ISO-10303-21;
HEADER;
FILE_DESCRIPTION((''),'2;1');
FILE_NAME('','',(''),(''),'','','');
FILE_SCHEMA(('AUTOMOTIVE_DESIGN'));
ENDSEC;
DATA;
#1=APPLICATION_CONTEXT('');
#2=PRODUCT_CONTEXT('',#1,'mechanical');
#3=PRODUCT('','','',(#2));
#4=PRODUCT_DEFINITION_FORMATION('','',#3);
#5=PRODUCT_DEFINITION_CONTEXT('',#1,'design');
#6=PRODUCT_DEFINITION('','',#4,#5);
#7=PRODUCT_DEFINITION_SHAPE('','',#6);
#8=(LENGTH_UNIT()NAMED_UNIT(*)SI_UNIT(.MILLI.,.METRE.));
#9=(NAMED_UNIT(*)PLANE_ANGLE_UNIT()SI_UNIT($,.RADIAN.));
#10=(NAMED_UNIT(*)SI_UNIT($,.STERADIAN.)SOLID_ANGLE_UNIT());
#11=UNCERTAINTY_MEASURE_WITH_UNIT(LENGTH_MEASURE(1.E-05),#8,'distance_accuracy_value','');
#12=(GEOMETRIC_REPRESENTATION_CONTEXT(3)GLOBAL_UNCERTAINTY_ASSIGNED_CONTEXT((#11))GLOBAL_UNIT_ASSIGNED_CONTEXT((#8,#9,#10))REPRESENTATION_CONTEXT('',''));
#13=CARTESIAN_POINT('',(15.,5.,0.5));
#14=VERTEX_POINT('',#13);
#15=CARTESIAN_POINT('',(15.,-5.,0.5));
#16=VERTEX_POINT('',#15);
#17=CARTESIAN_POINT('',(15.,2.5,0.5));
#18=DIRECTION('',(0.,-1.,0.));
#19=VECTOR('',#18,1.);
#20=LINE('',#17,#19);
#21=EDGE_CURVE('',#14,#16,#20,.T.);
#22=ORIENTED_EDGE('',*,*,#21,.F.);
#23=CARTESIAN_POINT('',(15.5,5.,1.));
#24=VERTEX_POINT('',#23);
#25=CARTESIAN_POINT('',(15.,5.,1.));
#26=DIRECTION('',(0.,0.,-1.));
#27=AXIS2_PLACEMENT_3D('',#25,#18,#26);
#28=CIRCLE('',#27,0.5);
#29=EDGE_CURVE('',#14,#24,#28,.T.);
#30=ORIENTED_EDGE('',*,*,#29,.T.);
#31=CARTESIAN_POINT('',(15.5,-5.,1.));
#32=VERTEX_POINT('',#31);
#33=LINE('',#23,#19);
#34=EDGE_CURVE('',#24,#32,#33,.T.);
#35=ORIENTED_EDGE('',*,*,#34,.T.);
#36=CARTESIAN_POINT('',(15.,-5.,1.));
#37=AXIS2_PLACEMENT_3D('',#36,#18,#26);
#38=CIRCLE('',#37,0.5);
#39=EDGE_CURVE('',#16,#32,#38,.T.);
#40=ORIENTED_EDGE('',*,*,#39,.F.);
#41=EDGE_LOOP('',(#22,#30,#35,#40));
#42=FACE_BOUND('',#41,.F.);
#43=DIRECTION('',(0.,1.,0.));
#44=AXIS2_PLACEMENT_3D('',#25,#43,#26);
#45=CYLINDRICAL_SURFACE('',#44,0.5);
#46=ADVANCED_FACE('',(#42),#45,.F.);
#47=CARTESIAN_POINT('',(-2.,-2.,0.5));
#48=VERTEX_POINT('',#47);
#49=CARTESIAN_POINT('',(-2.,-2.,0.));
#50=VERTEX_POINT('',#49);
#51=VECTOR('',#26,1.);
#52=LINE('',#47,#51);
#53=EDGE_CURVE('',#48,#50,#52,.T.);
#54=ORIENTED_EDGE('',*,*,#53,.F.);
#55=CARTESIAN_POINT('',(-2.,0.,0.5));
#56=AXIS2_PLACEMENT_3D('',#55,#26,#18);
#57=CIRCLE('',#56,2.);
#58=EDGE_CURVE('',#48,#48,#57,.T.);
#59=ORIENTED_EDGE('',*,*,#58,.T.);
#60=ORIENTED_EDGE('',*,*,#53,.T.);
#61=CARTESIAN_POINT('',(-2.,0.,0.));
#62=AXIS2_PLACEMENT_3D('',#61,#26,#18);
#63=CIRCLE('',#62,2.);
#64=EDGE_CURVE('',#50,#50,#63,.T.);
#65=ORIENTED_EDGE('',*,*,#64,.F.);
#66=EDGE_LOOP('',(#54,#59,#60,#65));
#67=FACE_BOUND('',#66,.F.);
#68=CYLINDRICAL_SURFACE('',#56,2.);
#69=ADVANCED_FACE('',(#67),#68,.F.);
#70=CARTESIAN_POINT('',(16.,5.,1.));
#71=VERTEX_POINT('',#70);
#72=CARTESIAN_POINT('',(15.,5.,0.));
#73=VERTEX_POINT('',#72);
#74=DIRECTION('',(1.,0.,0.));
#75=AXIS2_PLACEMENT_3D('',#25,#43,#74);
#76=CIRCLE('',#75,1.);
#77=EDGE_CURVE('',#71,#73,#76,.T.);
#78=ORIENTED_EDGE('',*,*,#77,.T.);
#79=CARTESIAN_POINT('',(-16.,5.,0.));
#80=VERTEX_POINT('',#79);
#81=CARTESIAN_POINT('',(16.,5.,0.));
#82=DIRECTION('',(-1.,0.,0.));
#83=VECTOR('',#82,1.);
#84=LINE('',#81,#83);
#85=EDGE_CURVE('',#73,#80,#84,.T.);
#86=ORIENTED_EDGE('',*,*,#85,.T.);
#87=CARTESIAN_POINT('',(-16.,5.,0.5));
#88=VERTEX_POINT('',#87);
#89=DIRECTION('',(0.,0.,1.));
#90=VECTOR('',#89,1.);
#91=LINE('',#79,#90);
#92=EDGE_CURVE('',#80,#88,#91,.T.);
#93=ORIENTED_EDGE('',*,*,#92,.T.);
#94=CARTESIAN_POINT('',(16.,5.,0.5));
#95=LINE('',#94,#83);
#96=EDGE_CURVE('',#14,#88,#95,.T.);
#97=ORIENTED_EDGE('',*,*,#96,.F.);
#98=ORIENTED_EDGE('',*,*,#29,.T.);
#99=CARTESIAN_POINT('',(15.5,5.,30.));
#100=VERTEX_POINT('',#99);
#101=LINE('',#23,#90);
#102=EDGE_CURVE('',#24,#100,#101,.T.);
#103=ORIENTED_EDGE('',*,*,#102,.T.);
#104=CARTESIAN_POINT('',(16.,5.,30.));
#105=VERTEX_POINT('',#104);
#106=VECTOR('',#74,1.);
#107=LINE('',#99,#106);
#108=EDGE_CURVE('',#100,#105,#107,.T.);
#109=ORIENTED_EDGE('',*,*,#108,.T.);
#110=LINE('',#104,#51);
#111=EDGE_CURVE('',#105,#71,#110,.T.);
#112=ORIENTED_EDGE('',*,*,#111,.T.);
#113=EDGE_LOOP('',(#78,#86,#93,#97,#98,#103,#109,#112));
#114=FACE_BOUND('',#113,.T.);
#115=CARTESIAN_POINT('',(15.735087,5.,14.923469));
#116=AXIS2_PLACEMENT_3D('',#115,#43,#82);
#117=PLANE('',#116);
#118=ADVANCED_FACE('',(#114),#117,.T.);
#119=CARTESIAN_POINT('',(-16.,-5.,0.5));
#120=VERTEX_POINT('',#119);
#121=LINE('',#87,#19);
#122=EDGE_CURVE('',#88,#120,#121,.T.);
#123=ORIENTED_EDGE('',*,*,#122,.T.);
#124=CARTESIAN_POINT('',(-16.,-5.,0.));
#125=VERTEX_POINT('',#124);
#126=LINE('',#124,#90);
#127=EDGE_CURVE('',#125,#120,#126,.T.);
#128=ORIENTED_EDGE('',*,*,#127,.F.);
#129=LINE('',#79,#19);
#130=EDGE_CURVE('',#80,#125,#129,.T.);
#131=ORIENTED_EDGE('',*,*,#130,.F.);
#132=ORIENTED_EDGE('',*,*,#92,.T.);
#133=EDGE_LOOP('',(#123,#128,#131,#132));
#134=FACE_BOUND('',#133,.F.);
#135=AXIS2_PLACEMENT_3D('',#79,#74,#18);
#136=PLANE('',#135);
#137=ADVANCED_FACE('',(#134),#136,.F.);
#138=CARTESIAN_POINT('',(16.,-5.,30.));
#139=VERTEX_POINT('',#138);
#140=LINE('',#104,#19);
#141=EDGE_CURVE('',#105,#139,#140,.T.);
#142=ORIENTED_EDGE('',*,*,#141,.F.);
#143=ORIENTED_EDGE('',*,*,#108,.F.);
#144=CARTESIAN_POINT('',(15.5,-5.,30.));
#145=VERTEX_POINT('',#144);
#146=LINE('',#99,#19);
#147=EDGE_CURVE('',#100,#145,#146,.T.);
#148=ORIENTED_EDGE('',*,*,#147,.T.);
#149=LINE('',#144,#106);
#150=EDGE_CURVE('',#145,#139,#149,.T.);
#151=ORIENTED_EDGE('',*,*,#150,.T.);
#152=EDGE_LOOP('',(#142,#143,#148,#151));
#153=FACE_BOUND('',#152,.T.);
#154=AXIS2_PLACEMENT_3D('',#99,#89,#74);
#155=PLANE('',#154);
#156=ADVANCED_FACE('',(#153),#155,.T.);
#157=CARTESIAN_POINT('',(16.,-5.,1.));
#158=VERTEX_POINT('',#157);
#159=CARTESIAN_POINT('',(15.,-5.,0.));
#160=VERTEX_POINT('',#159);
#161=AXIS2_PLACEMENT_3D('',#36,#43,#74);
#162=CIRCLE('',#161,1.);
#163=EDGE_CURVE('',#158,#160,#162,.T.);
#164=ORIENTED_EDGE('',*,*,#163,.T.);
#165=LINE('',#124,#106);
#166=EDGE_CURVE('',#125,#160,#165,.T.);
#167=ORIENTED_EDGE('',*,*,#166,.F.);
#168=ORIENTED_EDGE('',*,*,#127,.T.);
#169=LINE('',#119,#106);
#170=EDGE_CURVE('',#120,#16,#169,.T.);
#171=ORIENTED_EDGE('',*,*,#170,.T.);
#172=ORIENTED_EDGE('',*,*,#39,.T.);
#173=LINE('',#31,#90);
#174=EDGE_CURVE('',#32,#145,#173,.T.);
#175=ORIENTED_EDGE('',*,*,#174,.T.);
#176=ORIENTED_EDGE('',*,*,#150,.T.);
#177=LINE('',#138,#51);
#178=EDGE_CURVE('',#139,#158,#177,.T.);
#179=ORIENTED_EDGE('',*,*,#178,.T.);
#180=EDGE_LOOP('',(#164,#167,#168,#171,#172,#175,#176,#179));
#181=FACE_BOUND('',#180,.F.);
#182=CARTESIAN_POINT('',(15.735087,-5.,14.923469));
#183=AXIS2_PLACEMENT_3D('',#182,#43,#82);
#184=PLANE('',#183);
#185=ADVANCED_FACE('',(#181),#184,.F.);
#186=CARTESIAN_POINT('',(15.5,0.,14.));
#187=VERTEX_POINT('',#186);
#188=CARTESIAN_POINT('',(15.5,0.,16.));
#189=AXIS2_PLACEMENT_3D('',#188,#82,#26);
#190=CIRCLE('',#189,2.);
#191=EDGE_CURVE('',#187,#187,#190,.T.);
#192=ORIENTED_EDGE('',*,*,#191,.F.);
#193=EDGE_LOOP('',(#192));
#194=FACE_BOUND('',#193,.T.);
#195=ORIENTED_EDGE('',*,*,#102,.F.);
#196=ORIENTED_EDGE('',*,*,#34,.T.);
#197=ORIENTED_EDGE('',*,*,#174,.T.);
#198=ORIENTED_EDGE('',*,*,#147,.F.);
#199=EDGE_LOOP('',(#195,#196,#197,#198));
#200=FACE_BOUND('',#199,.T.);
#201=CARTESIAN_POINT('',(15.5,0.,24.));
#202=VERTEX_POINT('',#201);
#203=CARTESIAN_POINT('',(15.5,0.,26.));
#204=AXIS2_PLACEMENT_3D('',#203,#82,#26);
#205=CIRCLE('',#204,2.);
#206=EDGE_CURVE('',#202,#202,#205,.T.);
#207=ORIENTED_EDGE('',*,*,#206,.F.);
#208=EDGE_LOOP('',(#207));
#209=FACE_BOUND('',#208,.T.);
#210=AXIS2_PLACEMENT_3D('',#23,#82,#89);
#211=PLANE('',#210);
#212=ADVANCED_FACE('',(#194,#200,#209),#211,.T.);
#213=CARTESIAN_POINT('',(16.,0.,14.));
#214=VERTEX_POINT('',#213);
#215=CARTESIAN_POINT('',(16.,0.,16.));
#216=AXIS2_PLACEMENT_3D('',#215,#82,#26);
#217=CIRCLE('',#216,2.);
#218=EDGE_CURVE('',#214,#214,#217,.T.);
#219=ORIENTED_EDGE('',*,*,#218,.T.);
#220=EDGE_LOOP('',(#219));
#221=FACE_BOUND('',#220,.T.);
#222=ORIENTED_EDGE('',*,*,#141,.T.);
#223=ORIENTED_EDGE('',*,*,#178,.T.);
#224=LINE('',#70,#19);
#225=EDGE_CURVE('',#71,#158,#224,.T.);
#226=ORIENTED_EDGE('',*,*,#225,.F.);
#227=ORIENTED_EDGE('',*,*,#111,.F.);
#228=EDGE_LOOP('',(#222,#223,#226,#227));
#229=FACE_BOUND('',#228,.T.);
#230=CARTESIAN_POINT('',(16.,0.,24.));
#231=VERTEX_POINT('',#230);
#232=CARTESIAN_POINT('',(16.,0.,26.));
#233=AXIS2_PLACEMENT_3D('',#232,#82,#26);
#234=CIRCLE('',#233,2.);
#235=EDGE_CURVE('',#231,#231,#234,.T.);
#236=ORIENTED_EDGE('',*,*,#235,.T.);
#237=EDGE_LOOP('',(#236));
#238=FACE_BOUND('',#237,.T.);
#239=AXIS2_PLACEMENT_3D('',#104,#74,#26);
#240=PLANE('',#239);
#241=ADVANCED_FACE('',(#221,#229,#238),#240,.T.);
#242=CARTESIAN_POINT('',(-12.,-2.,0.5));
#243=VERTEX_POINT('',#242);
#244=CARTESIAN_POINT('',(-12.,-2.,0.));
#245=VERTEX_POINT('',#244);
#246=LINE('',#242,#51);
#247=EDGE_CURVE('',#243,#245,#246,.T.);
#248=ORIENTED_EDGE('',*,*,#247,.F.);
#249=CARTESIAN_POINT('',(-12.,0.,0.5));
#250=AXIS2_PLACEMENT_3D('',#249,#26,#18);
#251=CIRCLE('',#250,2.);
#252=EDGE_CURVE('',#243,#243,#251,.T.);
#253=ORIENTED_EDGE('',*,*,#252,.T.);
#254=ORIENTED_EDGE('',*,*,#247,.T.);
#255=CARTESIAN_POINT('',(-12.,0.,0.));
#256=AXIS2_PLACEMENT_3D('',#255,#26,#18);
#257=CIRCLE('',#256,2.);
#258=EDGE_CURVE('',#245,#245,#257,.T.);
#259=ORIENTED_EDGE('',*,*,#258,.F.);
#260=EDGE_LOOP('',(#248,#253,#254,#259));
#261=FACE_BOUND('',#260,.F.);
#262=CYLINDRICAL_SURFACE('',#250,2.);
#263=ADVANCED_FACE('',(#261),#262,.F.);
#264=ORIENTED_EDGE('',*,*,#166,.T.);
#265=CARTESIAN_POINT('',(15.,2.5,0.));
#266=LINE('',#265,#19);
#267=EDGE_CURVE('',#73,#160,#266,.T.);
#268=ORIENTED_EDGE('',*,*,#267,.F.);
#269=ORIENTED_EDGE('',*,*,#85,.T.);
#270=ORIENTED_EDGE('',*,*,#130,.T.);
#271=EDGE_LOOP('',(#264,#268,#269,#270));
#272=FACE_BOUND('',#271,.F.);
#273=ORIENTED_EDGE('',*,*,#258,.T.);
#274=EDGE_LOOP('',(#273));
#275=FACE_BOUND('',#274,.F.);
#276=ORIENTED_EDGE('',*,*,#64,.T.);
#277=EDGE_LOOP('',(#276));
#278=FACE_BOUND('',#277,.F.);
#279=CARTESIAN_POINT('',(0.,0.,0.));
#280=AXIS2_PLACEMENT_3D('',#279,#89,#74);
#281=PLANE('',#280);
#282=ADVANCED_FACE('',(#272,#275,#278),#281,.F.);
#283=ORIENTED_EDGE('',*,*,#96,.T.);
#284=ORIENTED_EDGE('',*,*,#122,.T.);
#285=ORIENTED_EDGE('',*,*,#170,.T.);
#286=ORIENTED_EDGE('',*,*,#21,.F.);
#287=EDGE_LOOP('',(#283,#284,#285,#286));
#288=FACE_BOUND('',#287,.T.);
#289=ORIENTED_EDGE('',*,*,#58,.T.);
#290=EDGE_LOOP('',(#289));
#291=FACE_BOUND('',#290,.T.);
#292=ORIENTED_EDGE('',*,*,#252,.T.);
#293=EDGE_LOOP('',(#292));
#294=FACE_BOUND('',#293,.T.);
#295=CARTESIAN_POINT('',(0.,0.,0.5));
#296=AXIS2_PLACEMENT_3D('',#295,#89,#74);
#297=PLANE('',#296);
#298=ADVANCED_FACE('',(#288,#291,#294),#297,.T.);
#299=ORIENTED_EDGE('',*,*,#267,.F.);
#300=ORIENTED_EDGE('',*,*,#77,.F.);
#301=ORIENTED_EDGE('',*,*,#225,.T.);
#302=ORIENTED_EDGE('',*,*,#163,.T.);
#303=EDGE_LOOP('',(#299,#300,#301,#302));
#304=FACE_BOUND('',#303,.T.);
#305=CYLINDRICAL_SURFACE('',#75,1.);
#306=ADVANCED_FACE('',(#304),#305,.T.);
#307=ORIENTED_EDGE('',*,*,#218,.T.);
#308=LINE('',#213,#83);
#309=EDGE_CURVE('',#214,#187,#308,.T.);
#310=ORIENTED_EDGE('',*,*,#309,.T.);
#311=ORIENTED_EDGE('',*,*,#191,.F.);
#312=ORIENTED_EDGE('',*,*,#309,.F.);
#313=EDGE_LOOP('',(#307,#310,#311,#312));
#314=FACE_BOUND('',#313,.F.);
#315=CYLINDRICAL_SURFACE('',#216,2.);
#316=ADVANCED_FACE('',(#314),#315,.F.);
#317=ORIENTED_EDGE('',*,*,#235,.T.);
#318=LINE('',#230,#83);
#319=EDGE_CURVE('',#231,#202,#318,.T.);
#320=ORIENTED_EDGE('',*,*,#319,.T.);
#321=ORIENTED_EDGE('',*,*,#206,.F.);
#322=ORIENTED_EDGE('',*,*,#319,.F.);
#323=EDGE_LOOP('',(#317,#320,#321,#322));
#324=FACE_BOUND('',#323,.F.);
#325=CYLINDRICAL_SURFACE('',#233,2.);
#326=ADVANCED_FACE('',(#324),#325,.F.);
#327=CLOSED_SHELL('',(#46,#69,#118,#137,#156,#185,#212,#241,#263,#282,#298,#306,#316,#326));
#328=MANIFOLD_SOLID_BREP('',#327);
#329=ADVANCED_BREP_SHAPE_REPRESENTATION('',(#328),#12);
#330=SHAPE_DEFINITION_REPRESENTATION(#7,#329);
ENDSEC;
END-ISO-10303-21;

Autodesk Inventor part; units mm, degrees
ref_plane "YZ Plane" through (0, 0, 0) normal (1, 0, 0) x (0, 1, 0)
ref_plane "XZ Plane" through (0, 0, 0) normal (0, 1, 0) x (-1, 0, 0)
ref_plane "XY Plane" through (0, 0, 0) normal (0, 0, 1) x (1, 0, 0)
sketch "Sketch1" plane through (0, 0, 0) normal (0, 0, 1) x (1, 0, 0)
  line L0 (-16, -5) -> (16, -5)
  line L1 (16, -5) -> (16, 5)
  line L2 (16, 5) -> (-16, 5)
  line L3 (-16, 5) -> (-16, -5)
  line L4 (-16, -5) -> (16, 5) construction
  line L5 (16, -5) -> (-16, 5) construction
  point P0 (0, 0)
  dimension "d0" = 32
  dimension "d1" = 10
extrude "Plate1" add sketch "Sketch1" along normal blind 0.5
sketch "Sketch2" plane through (15.5, 5, 0) normal (1, 0, 0) x (0, 1, 0)
  line L0 (-10, 0) -> (0, 0)
  line L1 (0, 0) -> (0, 30)
  line L2 (0, 30) -> (-10, 30)
  line L3 (-10, 30) -> (-10, 0)
edge flange "Flange1" height 30 angle 90 thickness 0.5 bend radius 0.5 thickness toward (1, 0, 0) relief tear relief width 0.5 relief depth 0.25 edges at (16, 0, 0.5) wall of the first edge with corners at (15.5, -5, 0) (15.5, 5, 0) (15.5, 5, 30) (15.5, -5, 30)
bend "Bend1"
corner "Corner1"
sketch "Sketch4" plane through (0, 0, 0.5) normal (0, 0, 1) x (1, 0, 0)
  line L0 (-16, -5) -> (-16, 5) projected
  point P0 (0, 0)
  point P1 (-12, 0)
  point P2 (-2, 0)
  dimension "d13" = 4
  dimension "d14" = 14
hole "Hole1" at (-12, 0, 0.5) at (-2, 0, 0.5) direction (0, 0, -1) diameter 4 end through all
sketch "Sketch5" plane through (16, -5, 30) normal (1, 0, 0) x (0, 0, -1)
  line L0 (0, 0) -> (0, 10) projected
  point P0 (30, 5)
  point P1 (4, 5)
  point P2 (14, 5)
  dimension "d22" = 4
  dimension "d23" = 14
hole "Hole2" at (16, 0, 26) at (16, 0, 16) direction (-1, 0, 0) diameter 4 end through all
equation "\"d20\" = Thickness"
equation "\"d29\" = Thickness"
equation "\"d3\" = BendReliefWidth"
equation "\"d4\" = BendReliefDepth"
equation "\"d5\" = MinimumRemnant"
equation "\"d6\" = BendRadius"
equation "\"d9\" = BendRadius"
equation "\"d10\" = CornerReliefSize"
equation "\"d11\" = GapSize"
equation "\"d12\" = JacobiRadiusSize"
equation "\"BendRadius\" = Thickness"
equation "\"BendReliefWidth\" = Thickness"
equation "\"BendReliefDepth\" = 0.5 * Thickness"
equation "\"CornerReliefSize\" = 4 * Thickness"
equation "\"MinimumRemnant\" = 2 * Thickness"
equation "\"TransitionRadius\" = BendRadius"
equation "\"JacobiRadiusSize\" = BendRadius"
equation "\"GapSize\" = Thickness"
equation "\"d2\" = BendRadius"
equation "\"Thickness\" = 0.5"
properties part number "maker-beam-corner"
